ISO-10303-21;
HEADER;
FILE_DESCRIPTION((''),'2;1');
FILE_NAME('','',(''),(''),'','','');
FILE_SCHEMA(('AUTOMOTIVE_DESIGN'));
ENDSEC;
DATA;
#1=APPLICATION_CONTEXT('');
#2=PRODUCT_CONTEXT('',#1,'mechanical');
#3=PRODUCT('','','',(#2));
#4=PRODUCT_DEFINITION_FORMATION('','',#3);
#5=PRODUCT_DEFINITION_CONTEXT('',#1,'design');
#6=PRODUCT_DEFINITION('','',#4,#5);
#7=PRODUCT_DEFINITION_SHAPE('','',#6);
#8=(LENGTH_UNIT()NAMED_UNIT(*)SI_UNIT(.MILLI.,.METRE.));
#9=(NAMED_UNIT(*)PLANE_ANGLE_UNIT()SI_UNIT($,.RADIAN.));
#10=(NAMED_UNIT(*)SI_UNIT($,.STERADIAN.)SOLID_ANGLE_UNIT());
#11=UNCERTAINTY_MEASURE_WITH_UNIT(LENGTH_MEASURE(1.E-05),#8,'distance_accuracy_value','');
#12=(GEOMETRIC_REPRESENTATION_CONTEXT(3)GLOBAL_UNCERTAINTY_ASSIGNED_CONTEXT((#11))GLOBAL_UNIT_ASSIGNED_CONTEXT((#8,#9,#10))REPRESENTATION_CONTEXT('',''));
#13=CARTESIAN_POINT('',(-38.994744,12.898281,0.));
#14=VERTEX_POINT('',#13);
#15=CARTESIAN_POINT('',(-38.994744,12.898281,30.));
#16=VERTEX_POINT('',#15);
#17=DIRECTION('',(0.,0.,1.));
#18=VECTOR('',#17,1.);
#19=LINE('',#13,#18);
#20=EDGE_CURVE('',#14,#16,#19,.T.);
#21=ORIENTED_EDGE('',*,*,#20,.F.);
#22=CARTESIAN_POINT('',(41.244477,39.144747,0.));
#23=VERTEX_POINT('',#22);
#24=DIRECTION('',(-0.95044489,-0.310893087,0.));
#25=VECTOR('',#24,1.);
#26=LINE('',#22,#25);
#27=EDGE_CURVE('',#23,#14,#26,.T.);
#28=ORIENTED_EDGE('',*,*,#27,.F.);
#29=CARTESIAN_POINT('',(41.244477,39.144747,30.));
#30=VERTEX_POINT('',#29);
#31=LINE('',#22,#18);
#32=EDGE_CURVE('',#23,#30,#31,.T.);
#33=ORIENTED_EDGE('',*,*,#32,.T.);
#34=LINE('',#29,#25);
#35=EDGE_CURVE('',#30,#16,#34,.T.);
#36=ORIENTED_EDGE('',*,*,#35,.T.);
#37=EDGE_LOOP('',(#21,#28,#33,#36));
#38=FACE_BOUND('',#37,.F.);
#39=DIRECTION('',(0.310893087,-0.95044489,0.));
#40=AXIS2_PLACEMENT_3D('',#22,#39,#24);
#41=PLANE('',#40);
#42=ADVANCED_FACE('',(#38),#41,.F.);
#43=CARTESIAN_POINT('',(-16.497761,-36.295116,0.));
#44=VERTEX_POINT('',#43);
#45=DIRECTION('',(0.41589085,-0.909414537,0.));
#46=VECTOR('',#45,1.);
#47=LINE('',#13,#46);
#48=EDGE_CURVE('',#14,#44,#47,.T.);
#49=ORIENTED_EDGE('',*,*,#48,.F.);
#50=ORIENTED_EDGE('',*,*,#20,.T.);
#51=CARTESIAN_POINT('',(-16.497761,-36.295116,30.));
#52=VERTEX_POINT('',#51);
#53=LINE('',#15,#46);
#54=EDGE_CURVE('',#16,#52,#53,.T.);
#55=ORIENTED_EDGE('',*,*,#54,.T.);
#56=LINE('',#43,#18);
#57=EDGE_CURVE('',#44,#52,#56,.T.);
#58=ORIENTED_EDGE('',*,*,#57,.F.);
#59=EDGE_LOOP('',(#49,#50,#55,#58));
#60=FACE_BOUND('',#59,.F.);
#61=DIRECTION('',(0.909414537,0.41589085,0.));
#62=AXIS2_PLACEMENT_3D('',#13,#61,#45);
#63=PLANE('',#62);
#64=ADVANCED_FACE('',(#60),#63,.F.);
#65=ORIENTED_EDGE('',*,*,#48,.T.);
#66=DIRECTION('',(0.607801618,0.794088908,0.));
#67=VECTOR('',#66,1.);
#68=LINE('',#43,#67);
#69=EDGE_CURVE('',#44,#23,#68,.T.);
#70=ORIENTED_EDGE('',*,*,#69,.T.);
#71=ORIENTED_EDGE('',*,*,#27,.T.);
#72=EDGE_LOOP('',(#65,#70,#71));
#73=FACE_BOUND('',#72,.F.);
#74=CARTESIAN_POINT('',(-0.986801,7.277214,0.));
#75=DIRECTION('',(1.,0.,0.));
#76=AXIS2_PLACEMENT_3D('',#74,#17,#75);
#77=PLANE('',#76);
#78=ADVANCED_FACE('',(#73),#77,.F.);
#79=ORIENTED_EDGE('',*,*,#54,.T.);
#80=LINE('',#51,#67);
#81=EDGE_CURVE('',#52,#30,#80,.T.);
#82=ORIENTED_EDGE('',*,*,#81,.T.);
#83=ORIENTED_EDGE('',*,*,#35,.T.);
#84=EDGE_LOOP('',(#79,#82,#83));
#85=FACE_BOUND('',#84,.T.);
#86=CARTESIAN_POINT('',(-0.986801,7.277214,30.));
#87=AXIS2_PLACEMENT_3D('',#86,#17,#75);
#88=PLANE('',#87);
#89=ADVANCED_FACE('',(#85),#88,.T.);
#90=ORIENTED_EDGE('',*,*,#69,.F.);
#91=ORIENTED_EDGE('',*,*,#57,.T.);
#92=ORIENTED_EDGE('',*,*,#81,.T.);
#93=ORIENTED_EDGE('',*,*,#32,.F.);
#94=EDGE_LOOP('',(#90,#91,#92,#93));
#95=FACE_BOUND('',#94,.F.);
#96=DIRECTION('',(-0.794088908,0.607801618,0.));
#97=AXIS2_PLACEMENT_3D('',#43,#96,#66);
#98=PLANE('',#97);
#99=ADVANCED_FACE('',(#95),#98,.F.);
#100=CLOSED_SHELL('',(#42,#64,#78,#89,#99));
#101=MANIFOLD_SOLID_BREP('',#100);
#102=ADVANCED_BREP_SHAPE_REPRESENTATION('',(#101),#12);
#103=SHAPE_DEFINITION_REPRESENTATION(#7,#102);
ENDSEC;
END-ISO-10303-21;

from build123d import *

# Parameters (mm, degrees)
F1_DEPTH = 30


# Not quite as in the source:
# - the program builds the solid bodies; features that only make, move or delete a surface that nothing else refers to are left out


with BuildPart() as f1:
    # F0 (on Top) → F1 (new body)
    with BuildSketch(Plane.XY):
        Polygon((41.2444770336, 39.1447469592), (-38.9947444201, 12.8982812166), (-16.4977610111, -36.2951159477), align=None)
    extrude(amount=F1_DEPTH)


solid = f1.part
